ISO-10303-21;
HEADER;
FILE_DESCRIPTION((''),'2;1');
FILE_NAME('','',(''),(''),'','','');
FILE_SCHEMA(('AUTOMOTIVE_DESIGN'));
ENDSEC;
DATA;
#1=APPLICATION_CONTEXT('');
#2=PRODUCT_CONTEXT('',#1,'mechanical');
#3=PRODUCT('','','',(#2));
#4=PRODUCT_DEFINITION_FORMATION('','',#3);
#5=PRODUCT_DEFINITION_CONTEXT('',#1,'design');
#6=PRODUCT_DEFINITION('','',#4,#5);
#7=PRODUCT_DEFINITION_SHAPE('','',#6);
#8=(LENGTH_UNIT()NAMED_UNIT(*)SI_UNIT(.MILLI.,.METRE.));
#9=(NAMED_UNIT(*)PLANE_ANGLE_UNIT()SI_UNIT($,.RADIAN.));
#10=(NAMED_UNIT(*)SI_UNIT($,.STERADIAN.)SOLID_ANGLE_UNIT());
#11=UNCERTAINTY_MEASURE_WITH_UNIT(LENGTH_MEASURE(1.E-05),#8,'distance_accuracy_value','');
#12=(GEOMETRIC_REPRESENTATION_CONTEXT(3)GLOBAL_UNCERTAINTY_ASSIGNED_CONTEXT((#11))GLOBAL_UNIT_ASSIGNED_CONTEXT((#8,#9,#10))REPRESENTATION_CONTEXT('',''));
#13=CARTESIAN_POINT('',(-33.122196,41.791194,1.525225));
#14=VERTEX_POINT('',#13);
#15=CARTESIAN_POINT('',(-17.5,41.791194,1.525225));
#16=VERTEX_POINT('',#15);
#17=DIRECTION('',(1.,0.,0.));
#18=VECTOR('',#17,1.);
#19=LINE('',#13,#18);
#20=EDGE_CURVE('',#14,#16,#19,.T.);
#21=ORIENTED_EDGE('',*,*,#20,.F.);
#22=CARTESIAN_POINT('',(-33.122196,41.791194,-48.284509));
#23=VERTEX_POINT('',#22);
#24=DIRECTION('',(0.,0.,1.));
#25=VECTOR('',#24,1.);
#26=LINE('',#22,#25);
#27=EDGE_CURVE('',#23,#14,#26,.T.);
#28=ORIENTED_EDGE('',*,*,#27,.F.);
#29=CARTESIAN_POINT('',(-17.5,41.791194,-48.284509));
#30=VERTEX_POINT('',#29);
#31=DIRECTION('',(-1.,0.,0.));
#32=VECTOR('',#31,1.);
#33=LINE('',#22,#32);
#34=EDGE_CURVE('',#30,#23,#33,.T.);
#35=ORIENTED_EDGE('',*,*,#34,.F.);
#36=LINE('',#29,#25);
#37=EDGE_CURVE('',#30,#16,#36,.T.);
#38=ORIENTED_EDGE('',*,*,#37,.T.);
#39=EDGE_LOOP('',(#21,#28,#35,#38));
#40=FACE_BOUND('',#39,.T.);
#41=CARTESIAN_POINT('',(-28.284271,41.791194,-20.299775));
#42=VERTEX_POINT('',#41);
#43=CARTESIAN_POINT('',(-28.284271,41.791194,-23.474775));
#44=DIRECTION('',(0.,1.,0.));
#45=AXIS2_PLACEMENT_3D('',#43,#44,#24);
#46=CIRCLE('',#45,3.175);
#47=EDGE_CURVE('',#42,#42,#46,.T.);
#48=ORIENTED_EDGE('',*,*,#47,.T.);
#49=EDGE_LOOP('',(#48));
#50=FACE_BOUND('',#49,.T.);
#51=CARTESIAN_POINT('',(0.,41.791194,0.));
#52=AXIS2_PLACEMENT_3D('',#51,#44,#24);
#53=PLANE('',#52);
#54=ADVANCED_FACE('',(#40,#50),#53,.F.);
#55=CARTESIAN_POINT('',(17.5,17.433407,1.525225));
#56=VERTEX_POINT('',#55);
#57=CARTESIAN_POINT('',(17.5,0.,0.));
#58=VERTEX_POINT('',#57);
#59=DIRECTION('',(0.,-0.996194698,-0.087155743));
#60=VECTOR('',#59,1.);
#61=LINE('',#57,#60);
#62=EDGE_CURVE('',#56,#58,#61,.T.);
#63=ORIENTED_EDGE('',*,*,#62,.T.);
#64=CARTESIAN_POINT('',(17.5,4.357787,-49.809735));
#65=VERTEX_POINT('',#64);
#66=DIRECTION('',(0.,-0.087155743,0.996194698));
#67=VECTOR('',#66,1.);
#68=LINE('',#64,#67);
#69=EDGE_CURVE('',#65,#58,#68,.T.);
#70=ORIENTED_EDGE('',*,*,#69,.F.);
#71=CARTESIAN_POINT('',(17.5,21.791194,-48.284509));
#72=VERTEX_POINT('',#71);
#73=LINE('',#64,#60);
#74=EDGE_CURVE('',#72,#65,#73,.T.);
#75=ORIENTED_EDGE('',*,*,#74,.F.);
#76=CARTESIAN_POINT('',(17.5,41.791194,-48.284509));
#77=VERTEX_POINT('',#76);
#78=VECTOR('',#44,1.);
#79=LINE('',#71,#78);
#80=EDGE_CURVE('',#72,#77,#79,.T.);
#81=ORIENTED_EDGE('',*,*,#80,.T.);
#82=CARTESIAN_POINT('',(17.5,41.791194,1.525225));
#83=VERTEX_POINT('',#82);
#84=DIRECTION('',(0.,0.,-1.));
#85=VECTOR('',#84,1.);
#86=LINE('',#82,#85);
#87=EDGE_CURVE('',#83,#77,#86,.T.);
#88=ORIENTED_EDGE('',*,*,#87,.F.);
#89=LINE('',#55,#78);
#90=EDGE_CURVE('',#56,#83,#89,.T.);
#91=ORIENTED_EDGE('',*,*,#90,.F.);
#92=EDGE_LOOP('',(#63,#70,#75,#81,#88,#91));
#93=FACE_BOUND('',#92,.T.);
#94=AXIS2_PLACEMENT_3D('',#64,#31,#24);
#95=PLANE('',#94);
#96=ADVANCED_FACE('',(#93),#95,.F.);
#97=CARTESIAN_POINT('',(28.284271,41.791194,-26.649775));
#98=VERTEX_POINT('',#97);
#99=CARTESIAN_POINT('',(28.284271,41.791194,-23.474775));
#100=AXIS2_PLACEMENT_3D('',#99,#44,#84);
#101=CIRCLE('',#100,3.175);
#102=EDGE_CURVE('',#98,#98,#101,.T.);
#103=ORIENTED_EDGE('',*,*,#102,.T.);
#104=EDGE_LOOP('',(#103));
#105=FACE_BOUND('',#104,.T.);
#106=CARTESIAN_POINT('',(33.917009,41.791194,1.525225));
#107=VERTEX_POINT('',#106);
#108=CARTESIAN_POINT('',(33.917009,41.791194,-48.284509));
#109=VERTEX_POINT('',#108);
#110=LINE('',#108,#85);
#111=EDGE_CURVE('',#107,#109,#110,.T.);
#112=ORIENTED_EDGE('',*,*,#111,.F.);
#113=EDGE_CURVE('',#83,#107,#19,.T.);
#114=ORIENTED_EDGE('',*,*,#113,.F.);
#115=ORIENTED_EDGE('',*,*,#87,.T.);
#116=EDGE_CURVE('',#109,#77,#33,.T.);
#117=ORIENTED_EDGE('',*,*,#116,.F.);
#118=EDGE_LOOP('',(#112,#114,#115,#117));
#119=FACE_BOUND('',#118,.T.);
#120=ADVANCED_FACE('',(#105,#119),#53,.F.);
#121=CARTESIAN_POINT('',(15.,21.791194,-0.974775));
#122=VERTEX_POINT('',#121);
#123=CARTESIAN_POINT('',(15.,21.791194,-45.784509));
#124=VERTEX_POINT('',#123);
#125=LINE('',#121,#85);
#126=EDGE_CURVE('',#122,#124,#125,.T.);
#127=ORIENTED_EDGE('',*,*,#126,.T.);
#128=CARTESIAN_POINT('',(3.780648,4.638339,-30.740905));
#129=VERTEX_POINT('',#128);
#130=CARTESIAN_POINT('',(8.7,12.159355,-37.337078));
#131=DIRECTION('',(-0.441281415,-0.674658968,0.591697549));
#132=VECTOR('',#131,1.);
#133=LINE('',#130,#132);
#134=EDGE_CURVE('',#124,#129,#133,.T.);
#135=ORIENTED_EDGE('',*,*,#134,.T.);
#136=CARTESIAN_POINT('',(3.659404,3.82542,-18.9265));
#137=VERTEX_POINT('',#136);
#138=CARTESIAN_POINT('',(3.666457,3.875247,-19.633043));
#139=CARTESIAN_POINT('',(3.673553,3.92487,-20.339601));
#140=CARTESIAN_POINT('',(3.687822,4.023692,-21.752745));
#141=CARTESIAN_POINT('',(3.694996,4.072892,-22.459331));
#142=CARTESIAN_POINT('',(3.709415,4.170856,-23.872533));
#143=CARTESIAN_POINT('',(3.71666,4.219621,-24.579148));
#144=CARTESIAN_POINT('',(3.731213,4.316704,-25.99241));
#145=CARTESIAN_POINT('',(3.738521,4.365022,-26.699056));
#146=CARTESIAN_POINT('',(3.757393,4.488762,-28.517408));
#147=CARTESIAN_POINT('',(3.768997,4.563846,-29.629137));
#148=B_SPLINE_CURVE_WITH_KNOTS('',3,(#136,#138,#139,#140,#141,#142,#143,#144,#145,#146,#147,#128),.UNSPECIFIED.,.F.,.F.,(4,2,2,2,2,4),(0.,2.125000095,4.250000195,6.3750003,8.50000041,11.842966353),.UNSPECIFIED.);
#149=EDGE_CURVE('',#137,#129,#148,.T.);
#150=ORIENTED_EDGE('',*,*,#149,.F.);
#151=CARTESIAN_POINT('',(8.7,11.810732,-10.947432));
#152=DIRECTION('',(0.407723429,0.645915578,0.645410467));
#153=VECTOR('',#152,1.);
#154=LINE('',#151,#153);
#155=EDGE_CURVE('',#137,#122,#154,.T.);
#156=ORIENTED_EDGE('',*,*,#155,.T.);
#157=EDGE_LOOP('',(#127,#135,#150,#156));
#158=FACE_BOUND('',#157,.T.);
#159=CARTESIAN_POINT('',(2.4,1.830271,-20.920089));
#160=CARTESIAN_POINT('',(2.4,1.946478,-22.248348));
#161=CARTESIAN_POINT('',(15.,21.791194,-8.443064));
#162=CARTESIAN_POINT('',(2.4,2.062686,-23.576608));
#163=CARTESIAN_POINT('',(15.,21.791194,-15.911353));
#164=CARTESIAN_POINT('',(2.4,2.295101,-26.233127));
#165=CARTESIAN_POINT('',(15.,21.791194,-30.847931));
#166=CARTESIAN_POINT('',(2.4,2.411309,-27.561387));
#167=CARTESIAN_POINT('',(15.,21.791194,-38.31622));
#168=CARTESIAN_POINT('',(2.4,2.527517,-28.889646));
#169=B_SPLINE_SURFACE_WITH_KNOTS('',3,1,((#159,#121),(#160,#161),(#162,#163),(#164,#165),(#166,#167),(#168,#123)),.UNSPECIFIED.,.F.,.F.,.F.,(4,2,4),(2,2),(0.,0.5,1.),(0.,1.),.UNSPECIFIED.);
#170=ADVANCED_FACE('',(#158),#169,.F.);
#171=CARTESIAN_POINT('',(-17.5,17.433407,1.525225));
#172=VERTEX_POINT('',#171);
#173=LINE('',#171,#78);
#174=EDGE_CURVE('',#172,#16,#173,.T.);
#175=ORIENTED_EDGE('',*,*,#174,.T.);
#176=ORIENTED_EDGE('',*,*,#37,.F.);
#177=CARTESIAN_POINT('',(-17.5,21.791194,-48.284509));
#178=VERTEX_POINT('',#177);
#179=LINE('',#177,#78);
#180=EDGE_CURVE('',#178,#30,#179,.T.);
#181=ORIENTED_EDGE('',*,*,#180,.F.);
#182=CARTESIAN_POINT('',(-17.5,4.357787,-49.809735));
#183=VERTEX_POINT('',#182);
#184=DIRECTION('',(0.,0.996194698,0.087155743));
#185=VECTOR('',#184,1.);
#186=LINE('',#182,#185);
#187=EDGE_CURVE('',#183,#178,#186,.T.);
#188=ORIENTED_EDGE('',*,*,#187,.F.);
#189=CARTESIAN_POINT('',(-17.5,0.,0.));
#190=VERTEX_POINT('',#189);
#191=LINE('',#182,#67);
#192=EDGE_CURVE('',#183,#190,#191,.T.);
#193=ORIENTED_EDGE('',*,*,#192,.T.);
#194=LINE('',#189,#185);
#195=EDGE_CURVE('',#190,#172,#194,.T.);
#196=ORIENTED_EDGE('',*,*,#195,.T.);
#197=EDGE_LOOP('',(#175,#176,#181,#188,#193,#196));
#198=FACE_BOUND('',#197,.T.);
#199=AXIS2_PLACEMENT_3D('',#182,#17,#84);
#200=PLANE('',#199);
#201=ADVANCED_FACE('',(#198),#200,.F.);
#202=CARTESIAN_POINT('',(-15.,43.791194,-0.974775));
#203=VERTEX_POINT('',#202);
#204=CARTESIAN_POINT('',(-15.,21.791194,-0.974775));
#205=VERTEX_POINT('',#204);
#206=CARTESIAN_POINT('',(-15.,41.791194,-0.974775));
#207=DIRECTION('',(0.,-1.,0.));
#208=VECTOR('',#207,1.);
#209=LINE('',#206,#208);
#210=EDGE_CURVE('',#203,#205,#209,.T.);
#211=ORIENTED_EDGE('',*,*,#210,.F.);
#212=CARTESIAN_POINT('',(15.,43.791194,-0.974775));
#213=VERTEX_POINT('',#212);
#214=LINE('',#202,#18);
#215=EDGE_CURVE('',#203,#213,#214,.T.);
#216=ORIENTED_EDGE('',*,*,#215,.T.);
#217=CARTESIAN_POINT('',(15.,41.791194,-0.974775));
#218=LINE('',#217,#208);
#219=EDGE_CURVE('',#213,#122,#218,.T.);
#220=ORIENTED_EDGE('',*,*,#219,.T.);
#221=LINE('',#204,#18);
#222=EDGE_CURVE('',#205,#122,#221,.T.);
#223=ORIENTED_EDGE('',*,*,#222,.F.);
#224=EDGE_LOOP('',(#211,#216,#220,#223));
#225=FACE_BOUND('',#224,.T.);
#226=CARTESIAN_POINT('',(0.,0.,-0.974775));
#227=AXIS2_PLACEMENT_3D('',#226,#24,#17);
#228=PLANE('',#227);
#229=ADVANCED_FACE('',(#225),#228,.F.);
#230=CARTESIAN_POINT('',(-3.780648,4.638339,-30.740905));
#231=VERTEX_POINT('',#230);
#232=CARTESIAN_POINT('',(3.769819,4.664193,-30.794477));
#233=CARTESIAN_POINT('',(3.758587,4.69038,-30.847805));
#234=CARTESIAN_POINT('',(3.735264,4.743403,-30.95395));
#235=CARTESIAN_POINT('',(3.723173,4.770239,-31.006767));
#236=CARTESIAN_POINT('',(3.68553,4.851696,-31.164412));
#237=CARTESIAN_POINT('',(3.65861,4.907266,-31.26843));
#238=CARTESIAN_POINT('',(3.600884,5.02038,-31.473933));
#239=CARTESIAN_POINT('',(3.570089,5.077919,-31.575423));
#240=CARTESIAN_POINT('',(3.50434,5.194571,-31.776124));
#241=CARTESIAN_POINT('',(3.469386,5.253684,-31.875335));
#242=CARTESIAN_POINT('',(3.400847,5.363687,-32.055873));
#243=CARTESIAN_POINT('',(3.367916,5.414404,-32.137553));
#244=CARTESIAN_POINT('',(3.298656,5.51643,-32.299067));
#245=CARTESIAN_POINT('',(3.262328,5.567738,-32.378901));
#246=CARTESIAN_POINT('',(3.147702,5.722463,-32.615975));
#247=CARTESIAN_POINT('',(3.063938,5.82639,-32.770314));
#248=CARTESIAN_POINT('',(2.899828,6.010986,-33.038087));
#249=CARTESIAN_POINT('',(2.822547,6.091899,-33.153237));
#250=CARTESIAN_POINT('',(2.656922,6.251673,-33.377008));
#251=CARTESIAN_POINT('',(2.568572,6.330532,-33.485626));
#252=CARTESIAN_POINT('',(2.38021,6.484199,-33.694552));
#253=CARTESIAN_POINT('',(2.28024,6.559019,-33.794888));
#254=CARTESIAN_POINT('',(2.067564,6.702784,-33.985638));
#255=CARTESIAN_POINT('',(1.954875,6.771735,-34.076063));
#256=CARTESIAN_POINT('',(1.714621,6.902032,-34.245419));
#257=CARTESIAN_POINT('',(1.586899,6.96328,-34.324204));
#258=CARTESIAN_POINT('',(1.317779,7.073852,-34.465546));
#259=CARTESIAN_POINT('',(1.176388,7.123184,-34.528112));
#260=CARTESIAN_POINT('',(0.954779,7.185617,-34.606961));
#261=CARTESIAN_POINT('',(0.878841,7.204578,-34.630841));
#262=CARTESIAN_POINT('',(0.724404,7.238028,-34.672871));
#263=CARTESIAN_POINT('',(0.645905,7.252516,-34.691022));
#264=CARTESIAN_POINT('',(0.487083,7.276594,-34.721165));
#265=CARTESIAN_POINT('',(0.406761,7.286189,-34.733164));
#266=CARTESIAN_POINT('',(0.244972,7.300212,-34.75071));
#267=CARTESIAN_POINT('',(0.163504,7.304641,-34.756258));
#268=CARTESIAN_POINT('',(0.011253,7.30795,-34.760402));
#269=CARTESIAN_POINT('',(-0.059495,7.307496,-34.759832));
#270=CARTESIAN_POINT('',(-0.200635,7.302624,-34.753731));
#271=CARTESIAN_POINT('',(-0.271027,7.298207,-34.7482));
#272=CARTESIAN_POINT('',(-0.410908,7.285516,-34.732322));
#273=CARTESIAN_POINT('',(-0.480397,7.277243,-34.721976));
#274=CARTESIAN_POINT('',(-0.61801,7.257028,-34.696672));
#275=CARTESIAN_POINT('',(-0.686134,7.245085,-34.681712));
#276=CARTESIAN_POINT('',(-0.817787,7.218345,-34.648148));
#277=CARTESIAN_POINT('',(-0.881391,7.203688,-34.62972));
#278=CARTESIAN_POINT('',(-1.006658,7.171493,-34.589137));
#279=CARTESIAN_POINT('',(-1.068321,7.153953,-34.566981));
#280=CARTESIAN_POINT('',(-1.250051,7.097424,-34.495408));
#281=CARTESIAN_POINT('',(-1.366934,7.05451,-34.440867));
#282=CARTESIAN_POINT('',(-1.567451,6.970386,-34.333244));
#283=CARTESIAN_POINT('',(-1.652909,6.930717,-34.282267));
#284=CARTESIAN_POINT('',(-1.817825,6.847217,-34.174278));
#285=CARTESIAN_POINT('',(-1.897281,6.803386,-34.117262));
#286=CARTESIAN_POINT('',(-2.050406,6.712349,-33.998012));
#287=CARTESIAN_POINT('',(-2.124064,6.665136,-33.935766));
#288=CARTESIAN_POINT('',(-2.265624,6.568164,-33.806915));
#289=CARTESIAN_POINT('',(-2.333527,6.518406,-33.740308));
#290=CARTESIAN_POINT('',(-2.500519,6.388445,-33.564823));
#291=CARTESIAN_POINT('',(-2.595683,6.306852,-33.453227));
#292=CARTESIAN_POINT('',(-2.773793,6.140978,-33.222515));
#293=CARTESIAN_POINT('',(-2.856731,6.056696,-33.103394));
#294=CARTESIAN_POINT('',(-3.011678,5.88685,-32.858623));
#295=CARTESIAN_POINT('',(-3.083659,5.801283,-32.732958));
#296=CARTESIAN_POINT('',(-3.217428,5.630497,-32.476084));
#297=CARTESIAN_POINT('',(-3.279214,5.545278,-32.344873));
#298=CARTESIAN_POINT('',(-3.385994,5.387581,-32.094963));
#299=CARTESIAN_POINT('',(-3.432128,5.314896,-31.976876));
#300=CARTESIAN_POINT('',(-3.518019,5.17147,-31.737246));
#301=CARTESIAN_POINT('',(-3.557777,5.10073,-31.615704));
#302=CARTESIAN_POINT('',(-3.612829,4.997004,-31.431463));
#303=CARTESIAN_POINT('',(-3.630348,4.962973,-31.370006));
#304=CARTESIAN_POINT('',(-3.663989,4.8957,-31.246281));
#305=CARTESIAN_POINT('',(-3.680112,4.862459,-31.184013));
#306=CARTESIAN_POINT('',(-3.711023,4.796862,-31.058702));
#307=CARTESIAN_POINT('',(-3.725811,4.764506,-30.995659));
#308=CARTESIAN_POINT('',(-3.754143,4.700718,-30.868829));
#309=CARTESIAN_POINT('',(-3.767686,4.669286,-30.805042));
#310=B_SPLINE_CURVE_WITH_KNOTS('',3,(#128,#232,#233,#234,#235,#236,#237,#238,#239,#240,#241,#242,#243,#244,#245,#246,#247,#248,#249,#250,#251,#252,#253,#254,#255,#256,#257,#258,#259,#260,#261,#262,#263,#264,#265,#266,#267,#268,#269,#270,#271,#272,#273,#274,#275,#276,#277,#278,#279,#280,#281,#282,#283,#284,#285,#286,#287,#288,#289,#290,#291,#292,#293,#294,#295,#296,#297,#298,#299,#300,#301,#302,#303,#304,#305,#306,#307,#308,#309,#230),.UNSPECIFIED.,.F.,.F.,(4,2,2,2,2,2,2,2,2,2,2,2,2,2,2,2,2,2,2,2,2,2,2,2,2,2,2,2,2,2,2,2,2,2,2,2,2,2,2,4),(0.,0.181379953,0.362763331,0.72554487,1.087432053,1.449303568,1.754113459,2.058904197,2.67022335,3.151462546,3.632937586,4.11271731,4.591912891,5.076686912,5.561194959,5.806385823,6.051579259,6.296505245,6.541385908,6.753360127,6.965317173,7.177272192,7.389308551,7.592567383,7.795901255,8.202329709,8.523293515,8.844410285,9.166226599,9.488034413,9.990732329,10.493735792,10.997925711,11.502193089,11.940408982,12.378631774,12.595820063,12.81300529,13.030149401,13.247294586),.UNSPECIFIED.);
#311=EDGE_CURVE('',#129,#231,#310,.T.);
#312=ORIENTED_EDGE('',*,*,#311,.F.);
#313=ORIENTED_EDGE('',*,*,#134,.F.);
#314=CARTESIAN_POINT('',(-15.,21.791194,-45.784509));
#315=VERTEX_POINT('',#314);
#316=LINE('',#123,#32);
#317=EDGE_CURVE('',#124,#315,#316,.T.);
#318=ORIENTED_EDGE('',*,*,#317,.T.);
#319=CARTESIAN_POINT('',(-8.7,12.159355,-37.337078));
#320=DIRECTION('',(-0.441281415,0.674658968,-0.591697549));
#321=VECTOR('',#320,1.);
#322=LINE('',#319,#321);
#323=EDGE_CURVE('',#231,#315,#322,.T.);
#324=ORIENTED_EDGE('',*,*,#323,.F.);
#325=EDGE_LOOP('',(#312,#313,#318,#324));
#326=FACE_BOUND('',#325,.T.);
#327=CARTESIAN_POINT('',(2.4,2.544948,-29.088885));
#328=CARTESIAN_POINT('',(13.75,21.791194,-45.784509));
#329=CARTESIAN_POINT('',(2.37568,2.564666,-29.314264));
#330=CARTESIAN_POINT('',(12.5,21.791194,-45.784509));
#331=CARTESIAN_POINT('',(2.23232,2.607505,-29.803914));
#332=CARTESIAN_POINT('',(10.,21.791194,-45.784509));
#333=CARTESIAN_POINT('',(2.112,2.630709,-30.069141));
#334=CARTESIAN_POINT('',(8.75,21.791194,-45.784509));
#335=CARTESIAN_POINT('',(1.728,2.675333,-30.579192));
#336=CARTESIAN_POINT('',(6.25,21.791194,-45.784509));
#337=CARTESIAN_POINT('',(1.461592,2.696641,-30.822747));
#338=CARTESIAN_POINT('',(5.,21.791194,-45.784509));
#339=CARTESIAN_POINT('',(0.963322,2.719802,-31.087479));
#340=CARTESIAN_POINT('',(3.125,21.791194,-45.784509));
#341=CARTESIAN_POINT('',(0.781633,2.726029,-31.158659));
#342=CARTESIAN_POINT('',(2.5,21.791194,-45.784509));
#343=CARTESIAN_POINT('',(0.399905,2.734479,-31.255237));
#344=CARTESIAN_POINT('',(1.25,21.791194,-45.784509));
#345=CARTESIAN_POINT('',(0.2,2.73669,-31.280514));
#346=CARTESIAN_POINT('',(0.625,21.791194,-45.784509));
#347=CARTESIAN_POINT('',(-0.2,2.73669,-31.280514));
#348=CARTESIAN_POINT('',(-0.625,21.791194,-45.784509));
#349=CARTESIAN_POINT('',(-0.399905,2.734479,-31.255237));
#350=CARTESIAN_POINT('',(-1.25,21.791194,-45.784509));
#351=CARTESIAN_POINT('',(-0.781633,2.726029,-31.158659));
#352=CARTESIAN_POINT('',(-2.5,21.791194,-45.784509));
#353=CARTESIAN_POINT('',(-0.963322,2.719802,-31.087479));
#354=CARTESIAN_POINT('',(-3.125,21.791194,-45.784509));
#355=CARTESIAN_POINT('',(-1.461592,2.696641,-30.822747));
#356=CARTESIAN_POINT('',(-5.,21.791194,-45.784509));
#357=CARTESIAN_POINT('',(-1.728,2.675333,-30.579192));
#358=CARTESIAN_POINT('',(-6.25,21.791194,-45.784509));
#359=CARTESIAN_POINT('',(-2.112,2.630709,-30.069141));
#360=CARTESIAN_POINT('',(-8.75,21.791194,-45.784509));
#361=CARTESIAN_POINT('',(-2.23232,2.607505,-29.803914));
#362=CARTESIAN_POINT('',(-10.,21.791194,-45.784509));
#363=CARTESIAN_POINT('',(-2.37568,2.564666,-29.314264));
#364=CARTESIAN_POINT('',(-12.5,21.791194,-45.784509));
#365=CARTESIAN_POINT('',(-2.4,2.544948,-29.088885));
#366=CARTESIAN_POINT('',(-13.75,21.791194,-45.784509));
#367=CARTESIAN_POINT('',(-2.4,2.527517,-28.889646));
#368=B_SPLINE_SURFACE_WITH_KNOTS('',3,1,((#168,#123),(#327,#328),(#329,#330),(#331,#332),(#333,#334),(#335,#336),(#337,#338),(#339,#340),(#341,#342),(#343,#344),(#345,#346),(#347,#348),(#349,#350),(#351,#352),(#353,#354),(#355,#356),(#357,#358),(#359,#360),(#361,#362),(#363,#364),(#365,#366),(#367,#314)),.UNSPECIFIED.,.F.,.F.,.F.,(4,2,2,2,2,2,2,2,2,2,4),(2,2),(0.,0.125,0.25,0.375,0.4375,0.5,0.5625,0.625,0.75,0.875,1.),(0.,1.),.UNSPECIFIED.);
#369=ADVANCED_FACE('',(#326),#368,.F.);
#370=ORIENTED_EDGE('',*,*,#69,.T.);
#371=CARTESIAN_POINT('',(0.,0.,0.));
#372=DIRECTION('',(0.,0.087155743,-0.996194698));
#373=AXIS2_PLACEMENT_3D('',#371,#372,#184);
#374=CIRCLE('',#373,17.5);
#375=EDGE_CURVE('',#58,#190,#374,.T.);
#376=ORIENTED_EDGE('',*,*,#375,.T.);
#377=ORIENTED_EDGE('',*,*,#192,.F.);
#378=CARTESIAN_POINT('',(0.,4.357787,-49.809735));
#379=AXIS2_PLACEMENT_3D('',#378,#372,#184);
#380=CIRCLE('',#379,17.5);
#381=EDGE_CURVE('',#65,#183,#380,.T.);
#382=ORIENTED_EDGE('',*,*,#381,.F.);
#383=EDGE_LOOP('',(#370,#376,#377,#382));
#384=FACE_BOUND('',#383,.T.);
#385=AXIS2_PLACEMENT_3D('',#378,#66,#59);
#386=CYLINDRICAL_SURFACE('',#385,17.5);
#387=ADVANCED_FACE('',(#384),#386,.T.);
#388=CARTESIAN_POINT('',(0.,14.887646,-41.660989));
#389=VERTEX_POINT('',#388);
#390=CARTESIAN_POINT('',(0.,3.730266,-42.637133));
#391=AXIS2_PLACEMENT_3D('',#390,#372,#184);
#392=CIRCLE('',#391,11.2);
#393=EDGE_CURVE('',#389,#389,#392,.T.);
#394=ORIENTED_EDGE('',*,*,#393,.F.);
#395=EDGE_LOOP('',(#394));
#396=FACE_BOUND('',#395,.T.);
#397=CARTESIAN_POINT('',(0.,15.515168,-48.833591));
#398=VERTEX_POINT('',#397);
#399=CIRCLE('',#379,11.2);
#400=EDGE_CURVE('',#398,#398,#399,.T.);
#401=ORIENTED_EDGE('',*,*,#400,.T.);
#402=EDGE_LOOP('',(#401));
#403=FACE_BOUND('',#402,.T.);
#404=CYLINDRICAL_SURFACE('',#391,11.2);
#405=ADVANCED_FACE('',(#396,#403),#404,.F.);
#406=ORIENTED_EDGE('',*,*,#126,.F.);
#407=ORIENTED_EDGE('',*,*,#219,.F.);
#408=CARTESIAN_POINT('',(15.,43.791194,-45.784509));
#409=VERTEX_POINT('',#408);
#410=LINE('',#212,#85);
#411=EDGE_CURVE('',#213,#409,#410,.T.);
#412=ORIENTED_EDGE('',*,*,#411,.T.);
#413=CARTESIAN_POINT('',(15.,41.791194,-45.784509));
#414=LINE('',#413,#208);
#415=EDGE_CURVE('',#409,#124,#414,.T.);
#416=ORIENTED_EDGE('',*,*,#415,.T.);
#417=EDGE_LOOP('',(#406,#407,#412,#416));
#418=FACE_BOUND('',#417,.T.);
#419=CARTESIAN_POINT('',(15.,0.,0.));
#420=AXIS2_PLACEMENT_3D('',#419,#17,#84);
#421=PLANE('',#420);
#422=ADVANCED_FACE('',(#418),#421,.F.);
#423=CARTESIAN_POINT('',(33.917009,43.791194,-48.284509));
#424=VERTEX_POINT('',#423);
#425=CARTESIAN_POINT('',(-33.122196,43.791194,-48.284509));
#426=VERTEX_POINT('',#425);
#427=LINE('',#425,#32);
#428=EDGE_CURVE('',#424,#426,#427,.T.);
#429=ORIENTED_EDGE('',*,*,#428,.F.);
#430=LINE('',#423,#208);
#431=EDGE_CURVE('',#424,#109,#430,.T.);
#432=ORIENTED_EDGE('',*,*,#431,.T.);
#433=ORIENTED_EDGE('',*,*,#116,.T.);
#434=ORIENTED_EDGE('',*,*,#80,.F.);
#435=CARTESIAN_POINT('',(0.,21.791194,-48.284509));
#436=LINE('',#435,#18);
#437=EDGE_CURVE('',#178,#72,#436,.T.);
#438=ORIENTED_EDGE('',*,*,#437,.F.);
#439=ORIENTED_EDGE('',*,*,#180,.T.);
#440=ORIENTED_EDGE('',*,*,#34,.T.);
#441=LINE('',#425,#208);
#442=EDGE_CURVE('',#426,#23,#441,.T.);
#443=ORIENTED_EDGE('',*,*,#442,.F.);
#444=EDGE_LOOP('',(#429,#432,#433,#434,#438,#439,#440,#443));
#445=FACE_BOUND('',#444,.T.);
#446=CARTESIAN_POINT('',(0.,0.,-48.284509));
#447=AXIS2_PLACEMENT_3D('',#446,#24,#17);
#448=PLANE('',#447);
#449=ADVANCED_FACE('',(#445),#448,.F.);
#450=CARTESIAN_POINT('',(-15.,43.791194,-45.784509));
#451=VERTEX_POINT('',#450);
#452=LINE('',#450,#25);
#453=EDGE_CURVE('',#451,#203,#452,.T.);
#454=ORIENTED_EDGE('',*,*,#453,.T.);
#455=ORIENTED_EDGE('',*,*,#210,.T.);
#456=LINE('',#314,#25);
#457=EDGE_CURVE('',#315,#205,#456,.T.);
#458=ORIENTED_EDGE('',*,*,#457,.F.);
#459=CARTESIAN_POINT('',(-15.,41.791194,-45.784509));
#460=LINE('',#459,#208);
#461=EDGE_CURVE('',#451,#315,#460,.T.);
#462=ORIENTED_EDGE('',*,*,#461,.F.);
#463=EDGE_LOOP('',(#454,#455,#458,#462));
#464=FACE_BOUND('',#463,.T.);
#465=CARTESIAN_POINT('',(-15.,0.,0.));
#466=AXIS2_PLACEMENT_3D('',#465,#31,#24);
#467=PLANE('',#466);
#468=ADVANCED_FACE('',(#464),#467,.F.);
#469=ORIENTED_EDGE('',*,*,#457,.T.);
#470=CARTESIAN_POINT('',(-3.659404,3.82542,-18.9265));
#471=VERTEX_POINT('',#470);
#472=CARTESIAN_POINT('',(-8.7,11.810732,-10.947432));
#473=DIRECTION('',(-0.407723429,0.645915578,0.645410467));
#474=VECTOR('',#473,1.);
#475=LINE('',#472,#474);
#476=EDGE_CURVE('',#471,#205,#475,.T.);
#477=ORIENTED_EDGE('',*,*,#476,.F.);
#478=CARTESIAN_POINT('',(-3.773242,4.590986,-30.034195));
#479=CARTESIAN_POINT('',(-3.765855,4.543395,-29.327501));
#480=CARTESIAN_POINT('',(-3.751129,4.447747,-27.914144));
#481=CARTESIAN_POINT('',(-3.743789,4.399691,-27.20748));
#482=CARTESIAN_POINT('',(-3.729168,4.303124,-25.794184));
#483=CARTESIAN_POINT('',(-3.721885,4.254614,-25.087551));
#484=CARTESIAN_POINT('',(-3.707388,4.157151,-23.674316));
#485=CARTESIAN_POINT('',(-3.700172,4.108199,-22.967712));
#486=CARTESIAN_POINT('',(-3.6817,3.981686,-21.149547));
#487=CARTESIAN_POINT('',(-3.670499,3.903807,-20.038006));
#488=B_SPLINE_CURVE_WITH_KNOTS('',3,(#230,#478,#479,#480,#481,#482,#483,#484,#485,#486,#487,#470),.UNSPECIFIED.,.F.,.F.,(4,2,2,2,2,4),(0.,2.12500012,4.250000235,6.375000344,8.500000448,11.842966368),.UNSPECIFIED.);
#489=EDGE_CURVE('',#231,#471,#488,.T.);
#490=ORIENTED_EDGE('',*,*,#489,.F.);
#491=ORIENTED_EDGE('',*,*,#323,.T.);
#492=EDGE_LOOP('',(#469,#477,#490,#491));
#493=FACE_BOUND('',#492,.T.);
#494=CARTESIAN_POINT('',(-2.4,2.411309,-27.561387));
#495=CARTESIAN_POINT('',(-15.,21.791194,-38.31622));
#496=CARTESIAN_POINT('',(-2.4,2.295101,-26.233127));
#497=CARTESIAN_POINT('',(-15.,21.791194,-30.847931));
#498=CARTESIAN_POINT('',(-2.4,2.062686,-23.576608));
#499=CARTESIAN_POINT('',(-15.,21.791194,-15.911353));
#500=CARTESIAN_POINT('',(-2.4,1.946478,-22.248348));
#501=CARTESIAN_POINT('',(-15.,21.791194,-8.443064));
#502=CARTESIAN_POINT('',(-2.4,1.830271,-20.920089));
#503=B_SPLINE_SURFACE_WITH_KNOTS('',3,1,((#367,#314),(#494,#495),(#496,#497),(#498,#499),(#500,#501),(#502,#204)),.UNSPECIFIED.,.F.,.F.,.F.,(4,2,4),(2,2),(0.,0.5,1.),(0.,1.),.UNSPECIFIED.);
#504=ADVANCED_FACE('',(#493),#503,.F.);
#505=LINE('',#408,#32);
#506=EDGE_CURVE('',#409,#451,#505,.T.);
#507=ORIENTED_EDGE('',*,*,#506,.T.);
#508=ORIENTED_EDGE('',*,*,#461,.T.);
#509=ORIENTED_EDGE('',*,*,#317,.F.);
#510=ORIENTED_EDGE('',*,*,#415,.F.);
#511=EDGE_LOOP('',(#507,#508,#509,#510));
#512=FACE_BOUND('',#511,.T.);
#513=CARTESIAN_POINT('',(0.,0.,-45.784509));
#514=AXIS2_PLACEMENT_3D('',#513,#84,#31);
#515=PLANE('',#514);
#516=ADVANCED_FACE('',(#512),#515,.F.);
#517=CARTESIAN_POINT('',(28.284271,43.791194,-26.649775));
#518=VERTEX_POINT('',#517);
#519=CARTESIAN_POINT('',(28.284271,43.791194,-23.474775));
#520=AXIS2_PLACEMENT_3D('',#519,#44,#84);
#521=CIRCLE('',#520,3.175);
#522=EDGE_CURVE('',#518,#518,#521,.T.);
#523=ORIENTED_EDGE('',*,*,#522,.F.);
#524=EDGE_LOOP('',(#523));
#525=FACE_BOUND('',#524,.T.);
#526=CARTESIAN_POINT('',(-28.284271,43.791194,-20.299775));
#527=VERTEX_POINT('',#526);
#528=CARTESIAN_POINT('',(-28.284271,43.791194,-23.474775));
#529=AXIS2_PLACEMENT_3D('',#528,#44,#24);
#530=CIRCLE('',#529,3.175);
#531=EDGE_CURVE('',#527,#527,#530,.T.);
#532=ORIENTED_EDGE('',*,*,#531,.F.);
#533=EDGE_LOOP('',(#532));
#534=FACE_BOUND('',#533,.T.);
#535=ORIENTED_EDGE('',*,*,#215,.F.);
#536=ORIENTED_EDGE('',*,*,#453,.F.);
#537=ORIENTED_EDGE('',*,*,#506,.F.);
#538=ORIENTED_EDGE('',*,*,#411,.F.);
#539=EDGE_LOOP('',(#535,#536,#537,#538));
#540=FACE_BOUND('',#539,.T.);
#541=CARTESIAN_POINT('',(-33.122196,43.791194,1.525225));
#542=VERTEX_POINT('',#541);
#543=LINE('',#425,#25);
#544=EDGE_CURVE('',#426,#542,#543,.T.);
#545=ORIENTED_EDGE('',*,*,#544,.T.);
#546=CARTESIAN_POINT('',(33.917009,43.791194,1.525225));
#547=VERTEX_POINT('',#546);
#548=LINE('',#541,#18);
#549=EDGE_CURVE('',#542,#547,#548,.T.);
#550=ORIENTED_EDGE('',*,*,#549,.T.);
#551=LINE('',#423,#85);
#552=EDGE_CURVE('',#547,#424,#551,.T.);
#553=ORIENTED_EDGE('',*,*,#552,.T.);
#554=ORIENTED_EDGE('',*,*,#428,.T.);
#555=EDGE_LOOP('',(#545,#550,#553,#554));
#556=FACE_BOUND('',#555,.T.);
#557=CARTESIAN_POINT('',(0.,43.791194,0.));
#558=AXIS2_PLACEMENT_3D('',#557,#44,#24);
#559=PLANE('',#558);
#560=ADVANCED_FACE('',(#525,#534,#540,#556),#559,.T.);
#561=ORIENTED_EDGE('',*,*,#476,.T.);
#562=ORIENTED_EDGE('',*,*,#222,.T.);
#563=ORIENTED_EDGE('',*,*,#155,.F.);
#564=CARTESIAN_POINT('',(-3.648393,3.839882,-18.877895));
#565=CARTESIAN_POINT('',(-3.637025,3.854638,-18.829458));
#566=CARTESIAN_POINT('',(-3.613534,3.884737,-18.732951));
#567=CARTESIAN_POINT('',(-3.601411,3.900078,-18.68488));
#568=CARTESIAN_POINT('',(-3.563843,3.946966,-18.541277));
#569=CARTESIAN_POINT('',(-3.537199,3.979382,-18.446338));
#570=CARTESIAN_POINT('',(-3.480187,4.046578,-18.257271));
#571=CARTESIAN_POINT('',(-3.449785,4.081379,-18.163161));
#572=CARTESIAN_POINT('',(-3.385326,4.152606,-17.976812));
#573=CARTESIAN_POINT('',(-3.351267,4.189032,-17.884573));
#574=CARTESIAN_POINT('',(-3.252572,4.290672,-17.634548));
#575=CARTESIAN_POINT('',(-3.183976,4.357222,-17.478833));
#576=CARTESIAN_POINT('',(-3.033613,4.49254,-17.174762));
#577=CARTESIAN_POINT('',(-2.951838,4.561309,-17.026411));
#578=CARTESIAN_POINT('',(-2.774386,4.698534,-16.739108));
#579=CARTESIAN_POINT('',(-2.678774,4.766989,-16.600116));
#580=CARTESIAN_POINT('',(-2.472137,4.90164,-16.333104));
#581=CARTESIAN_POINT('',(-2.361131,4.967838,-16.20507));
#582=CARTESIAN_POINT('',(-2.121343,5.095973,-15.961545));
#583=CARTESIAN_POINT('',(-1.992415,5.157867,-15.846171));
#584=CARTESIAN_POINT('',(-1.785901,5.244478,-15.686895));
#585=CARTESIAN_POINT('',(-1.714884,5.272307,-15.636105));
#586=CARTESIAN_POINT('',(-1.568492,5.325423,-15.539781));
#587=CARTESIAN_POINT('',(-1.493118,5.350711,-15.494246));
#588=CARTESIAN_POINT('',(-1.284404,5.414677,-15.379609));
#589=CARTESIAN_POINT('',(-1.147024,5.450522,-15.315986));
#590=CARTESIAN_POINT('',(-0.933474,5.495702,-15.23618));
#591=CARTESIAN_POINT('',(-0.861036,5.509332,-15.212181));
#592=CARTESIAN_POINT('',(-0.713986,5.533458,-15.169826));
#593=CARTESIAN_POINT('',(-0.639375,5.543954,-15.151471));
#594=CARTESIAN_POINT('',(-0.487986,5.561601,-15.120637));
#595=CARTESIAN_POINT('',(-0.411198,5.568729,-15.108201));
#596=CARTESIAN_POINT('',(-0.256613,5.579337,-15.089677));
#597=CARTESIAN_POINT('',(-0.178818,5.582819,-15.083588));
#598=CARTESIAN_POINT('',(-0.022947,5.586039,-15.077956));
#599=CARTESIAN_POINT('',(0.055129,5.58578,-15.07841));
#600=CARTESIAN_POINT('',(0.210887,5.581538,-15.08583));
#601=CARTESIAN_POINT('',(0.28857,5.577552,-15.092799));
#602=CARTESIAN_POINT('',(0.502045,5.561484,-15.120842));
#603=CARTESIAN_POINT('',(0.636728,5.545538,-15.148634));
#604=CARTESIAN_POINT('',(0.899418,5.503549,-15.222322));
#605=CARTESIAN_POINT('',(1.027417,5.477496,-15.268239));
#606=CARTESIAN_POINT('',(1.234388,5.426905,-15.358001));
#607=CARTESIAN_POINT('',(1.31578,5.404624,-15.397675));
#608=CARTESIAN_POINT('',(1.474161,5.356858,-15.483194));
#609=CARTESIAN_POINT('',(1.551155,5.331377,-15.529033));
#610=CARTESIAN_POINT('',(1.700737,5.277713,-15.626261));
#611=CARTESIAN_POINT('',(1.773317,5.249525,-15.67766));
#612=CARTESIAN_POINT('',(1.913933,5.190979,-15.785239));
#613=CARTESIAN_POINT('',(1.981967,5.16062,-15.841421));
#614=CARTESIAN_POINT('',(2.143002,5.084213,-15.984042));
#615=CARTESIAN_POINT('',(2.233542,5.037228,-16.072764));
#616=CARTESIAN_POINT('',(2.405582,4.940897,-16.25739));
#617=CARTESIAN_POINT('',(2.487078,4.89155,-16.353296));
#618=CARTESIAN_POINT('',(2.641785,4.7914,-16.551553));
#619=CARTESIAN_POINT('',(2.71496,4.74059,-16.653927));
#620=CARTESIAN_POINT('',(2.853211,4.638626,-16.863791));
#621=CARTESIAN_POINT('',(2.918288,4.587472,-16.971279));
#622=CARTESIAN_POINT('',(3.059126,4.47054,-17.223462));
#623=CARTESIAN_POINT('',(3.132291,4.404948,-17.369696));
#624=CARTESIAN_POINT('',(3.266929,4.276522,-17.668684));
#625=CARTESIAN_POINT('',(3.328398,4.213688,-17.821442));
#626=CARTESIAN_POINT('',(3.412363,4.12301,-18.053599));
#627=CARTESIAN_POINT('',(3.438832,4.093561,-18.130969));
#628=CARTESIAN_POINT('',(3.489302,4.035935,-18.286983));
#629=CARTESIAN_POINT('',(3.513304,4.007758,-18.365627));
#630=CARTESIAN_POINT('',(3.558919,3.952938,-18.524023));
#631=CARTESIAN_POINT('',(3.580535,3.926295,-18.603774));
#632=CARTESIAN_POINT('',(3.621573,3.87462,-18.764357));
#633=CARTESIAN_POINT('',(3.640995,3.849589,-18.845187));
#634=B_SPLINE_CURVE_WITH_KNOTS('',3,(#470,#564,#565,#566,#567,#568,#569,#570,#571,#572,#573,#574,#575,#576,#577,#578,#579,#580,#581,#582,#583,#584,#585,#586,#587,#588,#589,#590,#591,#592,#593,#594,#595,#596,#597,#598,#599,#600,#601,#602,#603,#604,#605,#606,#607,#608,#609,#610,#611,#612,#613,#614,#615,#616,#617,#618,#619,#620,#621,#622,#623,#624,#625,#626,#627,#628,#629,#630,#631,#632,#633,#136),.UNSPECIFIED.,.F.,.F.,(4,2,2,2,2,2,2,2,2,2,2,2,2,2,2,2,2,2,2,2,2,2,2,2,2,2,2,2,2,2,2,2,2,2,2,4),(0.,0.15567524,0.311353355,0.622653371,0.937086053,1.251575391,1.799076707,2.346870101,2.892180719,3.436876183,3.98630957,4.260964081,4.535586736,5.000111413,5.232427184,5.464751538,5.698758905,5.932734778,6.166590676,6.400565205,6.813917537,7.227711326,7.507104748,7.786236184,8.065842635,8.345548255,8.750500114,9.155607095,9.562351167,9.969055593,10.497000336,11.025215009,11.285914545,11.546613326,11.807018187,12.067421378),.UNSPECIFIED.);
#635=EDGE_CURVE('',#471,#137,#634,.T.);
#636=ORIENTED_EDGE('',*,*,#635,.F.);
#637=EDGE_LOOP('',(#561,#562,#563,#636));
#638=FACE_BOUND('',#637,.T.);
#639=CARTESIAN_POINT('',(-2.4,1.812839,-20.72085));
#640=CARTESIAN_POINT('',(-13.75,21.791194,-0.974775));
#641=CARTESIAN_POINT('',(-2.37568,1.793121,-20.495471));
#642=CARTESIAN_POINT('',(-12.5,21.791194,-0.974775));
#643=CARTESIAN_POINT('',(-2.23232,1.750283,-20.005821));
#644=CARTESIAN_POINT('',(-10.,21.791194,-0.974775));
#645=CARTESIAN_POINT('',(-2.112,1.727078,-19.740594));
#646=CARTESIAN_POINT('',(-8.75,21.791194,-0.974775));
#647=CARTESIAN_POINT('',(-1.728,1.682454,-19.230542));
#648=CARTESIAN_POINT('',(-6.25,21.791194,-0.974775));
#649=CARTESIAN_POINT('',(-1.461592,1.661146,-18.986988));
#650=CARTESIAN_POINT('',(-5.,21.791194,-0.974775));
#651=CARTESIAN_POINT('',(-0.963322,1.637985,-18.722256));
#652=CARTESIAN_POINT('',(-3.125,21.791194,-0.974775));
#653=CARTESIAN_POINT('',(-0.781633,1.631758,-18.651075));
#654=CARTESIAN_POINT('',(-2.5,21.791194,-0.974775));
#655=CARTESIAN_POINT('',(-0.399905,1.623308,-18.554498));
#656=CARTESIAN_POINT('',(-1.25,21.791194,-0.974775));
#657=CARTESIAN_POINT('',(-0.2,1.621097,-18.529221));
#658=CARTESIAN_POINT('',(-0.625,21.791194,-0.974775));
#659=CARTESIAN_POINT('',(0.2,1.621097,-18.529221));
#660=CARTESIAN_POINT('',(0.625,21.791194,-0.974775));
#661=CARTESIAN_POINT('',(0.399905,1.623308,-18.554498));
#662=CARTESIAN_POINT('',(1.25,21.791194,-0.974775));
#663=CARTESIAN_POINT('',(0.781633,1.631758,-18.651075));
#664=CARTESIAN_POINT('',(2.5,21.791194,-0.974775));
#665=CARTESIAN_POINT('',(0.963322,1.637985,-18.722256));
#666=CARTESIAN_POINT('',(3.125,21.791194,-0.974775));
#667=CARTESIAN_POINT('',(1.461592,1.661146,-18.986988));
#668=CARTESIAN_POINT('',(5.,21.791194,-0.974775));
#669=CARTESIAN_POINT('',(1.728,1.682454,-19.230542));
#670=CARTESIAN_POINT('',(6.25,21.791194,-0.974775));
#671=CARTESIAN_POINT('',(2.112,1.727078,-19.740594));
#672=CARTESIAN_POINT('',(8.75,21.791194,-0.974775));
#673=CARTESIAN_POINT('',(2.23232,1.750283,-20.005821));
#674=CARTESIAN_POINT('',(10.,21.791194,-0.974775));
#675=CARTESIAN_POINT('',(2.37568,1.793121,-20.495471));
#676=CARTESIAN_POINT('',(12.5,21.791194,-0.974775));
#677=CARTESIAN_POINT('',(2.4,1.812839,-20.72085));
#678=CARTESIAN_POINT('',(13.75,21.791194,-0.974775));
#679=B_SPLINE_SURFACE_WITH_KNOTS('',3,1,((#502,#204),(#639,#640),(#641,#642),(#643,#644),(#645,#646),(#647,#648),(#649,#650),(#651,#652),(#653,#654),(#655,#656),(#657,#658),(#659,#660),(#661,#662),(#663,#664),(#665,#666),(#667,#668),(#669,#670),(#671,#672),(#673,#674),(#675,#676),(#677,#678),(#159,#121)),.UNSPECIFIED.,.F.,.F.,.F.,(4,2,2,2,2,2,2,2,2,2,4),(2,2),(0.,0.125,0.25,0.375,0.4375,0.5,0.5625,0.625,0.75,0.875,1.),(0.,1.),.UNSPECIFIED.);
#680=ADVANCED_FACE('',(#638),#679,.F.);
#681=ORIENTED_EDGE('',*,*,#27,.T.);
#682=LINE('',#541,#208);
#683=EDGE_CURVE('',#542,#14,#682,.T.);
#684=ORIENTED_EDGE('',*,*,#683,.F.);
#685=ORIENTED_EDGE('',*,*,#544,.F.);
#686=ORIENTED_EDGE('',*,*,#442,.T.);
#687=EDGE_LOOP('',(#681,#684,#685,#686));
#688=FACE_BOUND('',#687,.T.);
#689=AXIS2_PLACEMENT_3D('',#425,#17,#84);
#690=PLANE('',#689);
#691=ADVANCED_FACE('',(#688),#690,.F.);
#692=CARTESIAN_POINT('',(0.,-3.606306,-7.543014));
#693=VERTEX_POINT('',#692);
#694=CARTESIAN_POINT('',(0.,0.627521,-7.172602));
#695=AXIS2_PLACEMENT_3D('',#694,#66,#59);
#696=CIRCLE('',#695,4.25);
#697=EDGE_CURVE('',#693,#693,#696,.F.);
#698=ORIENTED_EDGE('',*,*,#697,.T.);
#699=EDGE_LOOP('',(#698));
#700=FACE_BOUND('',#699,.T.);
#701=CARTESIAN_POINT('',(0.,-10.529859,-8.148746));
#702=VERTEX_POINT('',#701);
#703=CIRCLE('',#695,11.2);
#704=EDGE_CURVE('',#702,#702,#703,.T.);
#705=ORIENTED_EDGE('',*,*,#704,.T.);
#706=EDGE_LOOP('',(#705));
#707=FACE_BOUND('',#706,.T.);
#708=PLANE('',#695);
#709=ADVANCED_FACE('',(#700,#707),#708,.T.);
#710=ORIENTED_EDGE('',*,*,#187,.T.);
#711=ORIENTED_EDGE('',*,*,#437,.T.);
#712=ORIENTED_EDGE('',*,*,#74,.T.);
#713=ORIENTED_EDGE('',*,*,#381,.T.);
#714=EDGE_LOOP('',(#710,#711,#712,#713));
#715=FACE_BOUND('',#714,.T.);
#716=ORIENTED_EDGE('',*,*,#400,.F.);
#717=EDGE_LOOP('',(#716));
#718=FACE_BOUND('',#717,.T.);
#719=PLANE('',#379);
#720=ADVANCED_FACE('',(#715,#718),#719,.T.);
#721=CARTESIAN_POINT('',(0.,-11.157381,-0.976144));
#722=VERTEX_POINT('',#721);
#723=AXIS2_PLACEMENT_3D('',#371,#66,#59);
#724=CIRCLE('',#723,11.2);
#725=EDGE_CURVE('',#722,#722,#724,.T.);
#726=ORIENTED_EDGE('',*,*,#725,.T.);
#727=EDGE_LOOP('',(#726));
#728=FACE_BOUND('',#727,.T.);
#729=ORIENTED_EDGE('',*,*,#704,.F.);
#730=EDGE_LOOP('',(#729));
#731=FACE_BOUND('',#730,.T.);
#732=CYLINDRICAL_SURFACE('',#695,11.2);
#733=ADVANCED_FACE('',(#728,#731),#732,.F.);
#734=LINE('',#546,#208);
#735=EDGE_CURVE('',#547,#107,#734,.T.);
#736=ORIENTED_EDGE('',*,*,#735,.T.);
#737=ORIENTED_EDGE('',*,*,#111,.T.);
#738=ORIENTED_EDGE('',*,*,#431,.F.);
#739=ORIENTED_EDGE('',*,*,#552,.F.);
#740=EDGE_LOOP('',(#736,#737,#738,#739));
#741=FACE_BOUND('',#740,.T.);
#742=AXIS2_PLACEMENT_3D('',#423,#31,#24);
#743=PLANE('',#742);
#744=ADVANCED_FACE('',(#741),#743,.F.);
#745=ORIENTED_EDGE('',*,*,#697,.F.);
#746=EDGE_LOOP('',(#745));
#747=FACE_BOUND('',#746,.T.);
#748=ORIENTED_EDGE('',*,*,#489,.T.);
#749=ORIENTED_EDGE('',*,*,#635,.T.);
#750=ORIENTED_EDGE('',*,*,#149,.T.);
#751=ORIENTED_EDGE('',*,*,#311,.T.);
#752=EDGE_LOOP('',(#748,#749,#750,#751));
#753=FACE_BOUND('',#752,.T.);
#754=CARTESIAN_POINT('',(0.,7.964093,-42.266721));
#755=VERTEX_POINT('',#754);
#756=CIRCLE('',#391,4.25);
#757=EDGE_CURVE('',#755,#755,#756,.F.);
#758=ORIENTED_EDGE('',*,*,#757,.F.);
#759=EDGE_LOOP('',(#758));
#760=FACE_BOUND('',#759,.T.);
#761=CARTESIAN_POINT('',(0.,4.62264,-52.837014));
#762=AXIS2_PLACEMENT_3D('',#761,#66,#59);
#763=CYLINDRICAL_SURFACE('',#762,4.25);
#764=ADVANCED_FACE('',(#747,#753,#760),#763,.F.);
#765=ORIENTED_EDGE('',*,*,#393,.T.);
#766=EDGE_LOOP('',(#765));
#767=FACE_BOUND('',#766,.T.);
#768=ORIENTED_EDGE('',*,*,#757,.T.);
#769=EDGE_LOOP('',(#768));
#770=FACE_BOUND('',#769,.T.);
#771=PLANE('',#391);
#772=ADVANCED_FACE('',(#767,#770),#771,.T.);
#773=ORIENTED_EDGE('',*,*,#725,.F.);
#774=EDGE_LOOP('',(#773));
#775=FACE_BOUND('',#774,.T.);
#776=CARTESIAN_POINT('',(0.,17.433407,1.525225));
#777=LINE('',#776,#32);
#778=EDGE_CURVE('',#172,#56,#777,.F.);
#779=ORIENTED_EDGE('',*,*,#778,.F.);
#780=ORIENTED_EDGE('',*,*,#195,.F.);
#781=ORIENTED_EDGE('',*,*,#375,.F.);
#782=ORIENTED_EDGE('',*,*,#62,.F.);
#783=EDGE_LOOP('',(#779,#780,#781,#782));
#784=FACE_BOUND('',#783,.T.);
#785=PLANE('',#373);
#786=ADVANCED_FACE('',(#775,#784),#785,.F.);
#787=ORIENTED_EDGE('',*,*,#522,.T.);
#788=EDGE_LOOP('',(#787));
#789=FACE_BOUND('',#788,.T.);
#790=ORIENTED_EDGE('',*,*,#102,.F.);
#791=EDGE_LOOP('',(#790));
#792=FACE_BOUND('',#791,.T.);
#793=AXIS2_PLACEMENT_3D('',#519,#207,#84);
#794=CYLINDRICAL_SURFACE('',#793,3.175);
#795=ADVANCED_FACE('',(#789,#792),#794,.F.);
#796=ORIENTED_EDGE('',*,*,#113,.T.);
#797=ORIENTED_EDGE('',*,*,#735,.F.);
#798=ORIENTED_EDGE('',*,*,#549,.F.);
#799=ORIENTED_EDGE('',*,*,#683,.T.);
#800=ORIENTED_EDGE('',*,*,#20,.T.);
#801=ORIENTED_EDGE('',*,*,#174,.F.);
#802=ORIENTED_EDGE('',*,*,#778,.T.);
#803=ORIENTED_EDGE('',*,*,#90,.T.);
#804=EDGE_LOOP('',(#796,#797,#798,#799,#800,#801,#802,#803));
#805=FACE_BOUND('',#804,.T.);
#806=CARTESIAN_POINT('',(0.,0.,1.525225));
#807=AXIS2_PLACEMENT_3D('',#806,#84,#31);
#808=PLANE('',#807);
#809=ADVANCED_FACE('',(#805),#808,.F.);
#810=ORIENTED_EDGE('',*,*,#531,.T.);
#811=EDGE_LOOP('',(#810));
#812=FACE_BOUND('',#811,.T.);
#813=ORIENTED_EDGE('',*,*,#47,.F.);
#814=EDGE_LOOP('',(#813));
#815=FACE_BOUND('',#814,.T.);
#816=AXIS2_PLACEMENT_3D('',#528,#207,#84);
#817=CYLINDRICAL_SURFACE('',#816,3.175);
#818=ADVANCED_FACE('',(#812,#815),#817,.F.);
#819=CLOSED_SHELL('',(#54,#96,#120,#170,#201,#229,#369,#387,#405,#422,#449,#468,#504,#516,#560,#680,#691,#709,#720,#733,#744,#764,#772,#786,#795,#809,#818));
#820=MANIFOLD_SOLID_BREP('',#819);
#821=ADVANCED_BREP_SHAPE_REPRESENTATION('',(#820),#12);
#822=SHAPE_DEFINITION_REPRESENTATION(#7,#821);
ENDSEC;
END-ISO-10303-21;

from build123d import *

# Parameters (mm, degrees)
BOSS_EXTRUDE2_DEPTH = 50
SKETCH19_R          = 4.25
CUT_EXTRUDE4_DEPTH  = 59.449844405
SKETCH20_R          = 11.2
CUT_EXTRUDE5_DEPTH  = 7.2
CUT_EXTRUDE6_START  = -7.2
SKETCH21_R          = 11.2
CUT_EXTRUDE6_DEPTH  = 7.2
SKETCH29_W          = 67.039204955
SKETCH29_H          = 49.809734905
SKETCH29_R          = 3.175
SKETCH29_W_2        = 30
SKETCH29_H_2        = 44.809734905
BOSS_EXTRUDE4_DEPTH = 2


with BuildPart() as part:
    # Sketch11 → Boss-Extrude2 (new body)
    with BuildSketch(Plane(origin=(0, 0, 0), x_dir=(-1, 0, 0), z_dir=(0, 0.08715574274765156, -0.9961946980917461))):
        with BuildLine():
            Line((-17.5, 0), (-17.5, 17.5))
            Line((-17.5, 17.5), (17.5, 17.5))
            Line((17.5, 17.5), (17.5, 0))
            ThreePointArc((17.5, 0), (0, -17.5), (-17.5, 0))
        make_face()
    extrude(amount=BOSS_EXTRUDE2_DEPTH)

    # Sketch19 → Cut-Extrude4 (cut, through all)
    with BuildSketch(Plane(origin=(0, 0, 0), x_dir=(1, 0, 0), z_dir=(0, -0.08715574274765156, 0.9961946980917461))):
        with Locations(Location((0, 0, 0), (0, 0, 270))):
            Circle(SKETCH19_R)
    extrude(amount=-CUT_EXTRUDE4_DEPTH, mode=Mode.SUBTRACT)

    # Sketch20 → Cut-Extrude5 (cut)
    with BuildSketch(Plane(origin=(0, 0, 0), x_dir=(1, 0, 0), z_dir=(0, -0.08715574274765156, 0.9961946980917461))):
        with Locations(Location((0, 0, 0), (0, 0, 270))):
            Circle(SKETCH20_R)
    extrude(amount=-CUT_EXTRUDE5_DEPTH, mode=Mode.SUBTRACT)

    # Sketch21 → Cut-Extrude6 (cut)
    with BuildSketch(Plane(origin=(0, 4.357787137, -49.809734905), x_dir=(-1, 0, 0), z_dir=(0, 0.08715574274765156, -0.9961946980917461)).offset(CUT_EXTRUDE6_START)):
        with Locations(Location((0, 0, 0), (0, 0, 270))):
            Circle(SKETCH21_R)
    extrude(amount=CUT_EXTRUDE6_DEPTH, mode=Mode.SUBTRACT)

    # Sketch23 → Loft3 section 0
    with BuildSketch(Plane(origin=(0, 17.433407217, 1.525225498), x_dir=(1, 0, 0), z_dir=(0, 0.9961946980917462, 0.08715574274765159))):
        with BuildLine():
            Line((17.5, 0), (17.5, 50))
            Line((17.5, 50), (-17.5, 50))
            Line((-17.5, 50), (-17.5, 0))
            Line((-17.5, 0), (17.5, 0))
        make_face()
    # Sketch24 → Loft3 section 1
    with BuildSketch(Plane(origin=(0, 41.791194354, 0), x_dir=(1, 0, 0), z_dir=(0, 1, 0))):
        with BuildLine():
            Line((17.5, -1.525225498), (17.5, 48.284509407))
            Line((17.5, 48.284509407), (-17.5, 48.284509407))
            Line((-17.5, 48.284509407), (-17.5, -1.525225498))
            Line((-17.5, -1.525225498), (17.5, -1.525225498))
        make_face()
    loft()

    # Sketch26 → Cut-Loft7 section 0
    with BuildSketch(Plane(origin=(0, 41.791194354, 0), x_dir=(1, 0, 0), z_dir=(0, 1, 0))):
        with BuildLine():
            Line((-15, 0.974774502), (15, 0.974774502))
            Line((15, 0.974774502), (15, 45.784509407))
            Line((15, 45.784509407), (-15, 45.784509407))
            Line((-15, 45.784509407), (-15, 0.974774502))
        make_face()
    # Sketch27 → Cut-Loft7 section 1
    with BuildSketch(Plane(origin=(0, 21.791194354, 0), x_dir=(1, 0, 0), z_dir=(0, 1, 0))):
        with BuildLine():
            Line((15, 0.974774502), (15, 45.784509407))
            Line((15, 45.784509407), (-15, 45.784509407))
            Line((-15, 45.784509407), (-15, 0.974774502))
            Line((-15, 0.974774502), (15, 0.974774502))
        make_face()
    loft(mode=Mode.SUBTRACT)

    # Cut-Loft8: read off the stored shape, not the designer's step
    # Cut-Loft8: loft between two sections, ruled curve by curve
    cut_loft8_from = [
        Edge.make_bspline([(2.4, 2.52751654, -28.889646245), (2.4, 2.544947688, -29.088885184), (2.37568, 2.564665803, -29.314264273), (2.23232, 2.607504594, -29.803913891), (2.112, 2.630708939, -30.069140767), (1.728, 2.675332679, -30.579192453), (1.461591696, 2.696640901, -30.822746545), (0.963321799, 2.719802012, -31.087479253), (0.781633136, 2.726029473, -31.158659456), (0.399905325, 2.734478939, -31.25523729), (0.2, 2.736690322, -31.28051352), (-0.2, 2.736690322, -31.28051352), (-0.399905325, 2.734478939, -31.25523729), (-0.781633136, 2.726029473, -31.158659456), (-0.963321799, 2.719802012, -31.087479253), (-1.461591696, 2.696640901, -30.822746545), (-1.728, 2.675332679, -30.579192453), (-2.112, 2.630708939, -30.069140767), (-2.23232, 2.607504594, -29.803913891), (-2.37568, 2.564665803, -29.314264273), (-2.4, 2.544947688, -29.088885184), (-2.4, 2.52751654, -28.889646245)], [0, 0, 0, 0, 0.125, 0.125, 0.25, 0.25, 0.375, 0.375, 0.4375, 0.4375, 0.5, 0.5, 0.5625, 0.5625, 0.625, 0.625, 0.75, 0.75, 0.875, 0.875, 1, 1, 1, 1], 3),
        Edge.make_bspline([(-2.4, 2.52751654, -28.889646245), (-2.4, 2.411308883, -27.561386647), (-2.4, 2.295101226, -26.23312705), (-2.4, 2.062685912, -23.576607855), (-2.4, 1.946478255, -22.248348257), (-2.4, 1.830270598, -20.92008866)], [0, 0, 0, 0, 0.5, 0.5, 1, 1, 1, 1], 3),
        Edge.make_bspline([(2.4, 1.830270598, -20.92008866), (2.4, 1.946478255, -22.248348257), (2.4, 2.062685912, -23.576607855), (2.4, 2.295101226, -26.23312705), (2.4, 2.411308883, -27.561386647), (2.4, 2.52751654, -28.889646245)], [0, 0, 0, 0, 0.5, 0.5, 1, 1, 1, 1], 3),
        Edge.make_bspline([(-2.4, 1.830270598, -20.92008866), (-2.4, 1.812839449, -20.72084972), (-2.37568, 1.793121334, -20.495470632), (-2.23232, 1.750282543, -20.005821014), (-2.112, 1.727078198, -19.740594137), (-1.728, 1.682454458, -19.230542452), (-1.461591696, 1.661146236, -18.98698836), (-0.963321799, 1.637985125, -18.722255651), (-0.781633136, 1.631757664, -18.651075448), (-0.399905325, 1.623308199, -18.554497614), (-0.2, 1.621096815, -18.529221385), (0.2, 1.621096815, -18.529221385), (0.399905325, 1.623308199, -18.554497614), (0.781633136, 1.631757664, -18.651075448), (0.963321799, 1.637985125, -18.722255651), (1.461591696, 1.661146236, -18.98698836), (1.728, 1.682454458, -19.230542452), (2.112, 1.727078198, -19.740594137), (2.23232, 1.750282543, -20.005821014), (2.37568, 1.793121334, -20.495470632), (2.4, 1.812839449, -20.72084972), (2.4, 1.830270598, -20.92008866)], [0, 0, 0, 0, 0.125, 0.125, 0.25, 0.25, 0.375, 0.375, 0.4375, 0.4375, 0.5, 0.5, 0.5625, 0.5625, 0.625, 0.625, 0.75, 0.75, 0.875, 0.875, 1, 1, 1, 1], 3),
    ]
    cut_loft8_to = [
        Edge.make_bspline([(15, 21.791194354, -45.784509407), (13.75, 21.791194354, -45.784509407), (12.5, 21.791194354, -45.784509407), (10, 21.791194354, -45.784509407), (8.75, 21.791194354, -45.784509407), (6.25, 21.791194354, -45.784509407), (5, 21.791194354, -45.784509407), (3.125, 21.791194354, -45.784509407), (2.5, 21.791194354, -45.784509407), (1.25, 21.791194354, -45.784509407), (0.625, 21.791194354, -45.784509407), (-0.625, 21.791194354, -45.784509407), (-1.25, 21.791194354, -45.784509407), (-2.5, 21.791194354, -45.784509407), (-3.125, 21.791194354, -45.784509407), (-5, 21.791194354, -45.784509407), (-6.25, 21.791194354, -45.784509407), (-8.75, 21.791194354, -45.784509407), (-10, 21.791194354, -45.784509407), (-12.5, 21.791194354, -45.784509407), (-13.75, 21.791194354, -45.784509407), (-15, 21.791194354, -45.784509407)], [0, 0, 0, 0, 0.125, 0.125, 0.25, 0.25, 0.375, 0.375, 0.4375, 0.4375, 0.5, 0.5, 0.5625, 0.5625, 0.625, 0.625, 0.75, 0.75, 0.875, 0.875, 1, 1, 1, 1], 3),
        Edge.make_bspline([(-15, 21.791194354, -45.784509407), (-15, 21.791194354, -38.316220256), (-15, 21.791194354, -30.847931105), (-15, 21.791194354, -15.911352803), (-15, 21.791194354, -8.443063653), (-15, 21.791194354, -0.974774502)], [0, 0, 0, 0, 0.5, 0.5, 1, 1, 1, 1], 3),
        Edge.make_bspline([(15, 21.791194354, -0.974774502), (15, 21.791194354, -8.443063653), (15, 21.791194354, -15.911352803), (15, 21.791194354, -30.847931105), (15, 21.791194354, -38.316220256), (15, 21.791194354, -45.784509407)], [0, 0, 0, 0, 0.5, 0.5, 1, 1, 1, 1], 3),
        Edge.make_bspline([(-15, 21.791194354, -0.974774502), (-13.75, 21.791194354, -0.974774502), (-12.5, 21.791194354, -0.974774502), (-10, 21.791194354, -0.974774502), (-8.75, 21.791194354, -0.974774502), (-6.25, 21.791194354, -0.974774502), (-5, 21.791194354, -0.974774502), (-3.125, 21.791194354, -0.974774502), (-2.5, 21.791194354, -0.974774502), (-1.25, 21.791194354, -0.974774502), (-0.625, 21.791194354, -0.974774502), (0.625, 21.791194354, -0.974774502), (1.25, 21.791194354, -0.974774502), (2.5, 21.791194354, -0.974774502), (3.125, 21.791194354, -0.974774502), (5, 21.791194354, -0.974774502), (6.25, 21.791194354, -0.974774502), (8.75, 21.791194354, -0.974774502), (10, 21.791194354, -0.974774502), (12.5, 21.791194354, -0.974774502), (13.75, 21.791194354, -0.974774502), (15, 21.791194354, -0.974774502)], [0, 0, 0, 0, 0.125, 0.125, 0.25, 0.25, 0.375, 0.375, 0.4375, 0.4375, 0.5, 0.5, 0.5625, 0.5625, 0.625, 0.625, 0.75, 0.75, 0.875, 0.875, 1, 1, 1, 1], 3),
    ]
    cut_loft8 = Solid(Shell([*[Face.make_surface_from_curves(cut_loft8_from[k], cut_loft8_to[k]) for k in range(4)], Face(Wire(cut_loft8_from)), Face(Wire(cut_loft8_to))]))
    add(cut_loft8, mode=Mode.SUBTRACT)

    # Sketch29 → Boss-Extrude4 (add)
    with BuildSketch(Plane(origin=(0, 41.791194354, 0), x_dir=(1, 0, 0), z_dir=(0, 1, 0))):
        with Locations((0.397406033, 23.379641955)):
            Rectangle(SKETCH29_W, SKETCH29_H)
        with Locations(Location((-28.284271247, 23.474774502, 0), (0, 0, 270))):
            Circle(SKETCH29_R, mode=Mode.SUBTRACT)
        with Locations(Location((28.284271247, 23.474774502, 0), (0, 0, 90))):
            Circle(SKETCH29_R, mode=Mode.SUBTRACT)
        with Locations((0, 23.379641955)):
            Rectangle(SKETCH29_W_2, SKETCH29_H_2, mode=Mode.SUBTRACT)
    extrude(amount=BOSS_EXTRUDE4_DEPTH)


solid = part.part
